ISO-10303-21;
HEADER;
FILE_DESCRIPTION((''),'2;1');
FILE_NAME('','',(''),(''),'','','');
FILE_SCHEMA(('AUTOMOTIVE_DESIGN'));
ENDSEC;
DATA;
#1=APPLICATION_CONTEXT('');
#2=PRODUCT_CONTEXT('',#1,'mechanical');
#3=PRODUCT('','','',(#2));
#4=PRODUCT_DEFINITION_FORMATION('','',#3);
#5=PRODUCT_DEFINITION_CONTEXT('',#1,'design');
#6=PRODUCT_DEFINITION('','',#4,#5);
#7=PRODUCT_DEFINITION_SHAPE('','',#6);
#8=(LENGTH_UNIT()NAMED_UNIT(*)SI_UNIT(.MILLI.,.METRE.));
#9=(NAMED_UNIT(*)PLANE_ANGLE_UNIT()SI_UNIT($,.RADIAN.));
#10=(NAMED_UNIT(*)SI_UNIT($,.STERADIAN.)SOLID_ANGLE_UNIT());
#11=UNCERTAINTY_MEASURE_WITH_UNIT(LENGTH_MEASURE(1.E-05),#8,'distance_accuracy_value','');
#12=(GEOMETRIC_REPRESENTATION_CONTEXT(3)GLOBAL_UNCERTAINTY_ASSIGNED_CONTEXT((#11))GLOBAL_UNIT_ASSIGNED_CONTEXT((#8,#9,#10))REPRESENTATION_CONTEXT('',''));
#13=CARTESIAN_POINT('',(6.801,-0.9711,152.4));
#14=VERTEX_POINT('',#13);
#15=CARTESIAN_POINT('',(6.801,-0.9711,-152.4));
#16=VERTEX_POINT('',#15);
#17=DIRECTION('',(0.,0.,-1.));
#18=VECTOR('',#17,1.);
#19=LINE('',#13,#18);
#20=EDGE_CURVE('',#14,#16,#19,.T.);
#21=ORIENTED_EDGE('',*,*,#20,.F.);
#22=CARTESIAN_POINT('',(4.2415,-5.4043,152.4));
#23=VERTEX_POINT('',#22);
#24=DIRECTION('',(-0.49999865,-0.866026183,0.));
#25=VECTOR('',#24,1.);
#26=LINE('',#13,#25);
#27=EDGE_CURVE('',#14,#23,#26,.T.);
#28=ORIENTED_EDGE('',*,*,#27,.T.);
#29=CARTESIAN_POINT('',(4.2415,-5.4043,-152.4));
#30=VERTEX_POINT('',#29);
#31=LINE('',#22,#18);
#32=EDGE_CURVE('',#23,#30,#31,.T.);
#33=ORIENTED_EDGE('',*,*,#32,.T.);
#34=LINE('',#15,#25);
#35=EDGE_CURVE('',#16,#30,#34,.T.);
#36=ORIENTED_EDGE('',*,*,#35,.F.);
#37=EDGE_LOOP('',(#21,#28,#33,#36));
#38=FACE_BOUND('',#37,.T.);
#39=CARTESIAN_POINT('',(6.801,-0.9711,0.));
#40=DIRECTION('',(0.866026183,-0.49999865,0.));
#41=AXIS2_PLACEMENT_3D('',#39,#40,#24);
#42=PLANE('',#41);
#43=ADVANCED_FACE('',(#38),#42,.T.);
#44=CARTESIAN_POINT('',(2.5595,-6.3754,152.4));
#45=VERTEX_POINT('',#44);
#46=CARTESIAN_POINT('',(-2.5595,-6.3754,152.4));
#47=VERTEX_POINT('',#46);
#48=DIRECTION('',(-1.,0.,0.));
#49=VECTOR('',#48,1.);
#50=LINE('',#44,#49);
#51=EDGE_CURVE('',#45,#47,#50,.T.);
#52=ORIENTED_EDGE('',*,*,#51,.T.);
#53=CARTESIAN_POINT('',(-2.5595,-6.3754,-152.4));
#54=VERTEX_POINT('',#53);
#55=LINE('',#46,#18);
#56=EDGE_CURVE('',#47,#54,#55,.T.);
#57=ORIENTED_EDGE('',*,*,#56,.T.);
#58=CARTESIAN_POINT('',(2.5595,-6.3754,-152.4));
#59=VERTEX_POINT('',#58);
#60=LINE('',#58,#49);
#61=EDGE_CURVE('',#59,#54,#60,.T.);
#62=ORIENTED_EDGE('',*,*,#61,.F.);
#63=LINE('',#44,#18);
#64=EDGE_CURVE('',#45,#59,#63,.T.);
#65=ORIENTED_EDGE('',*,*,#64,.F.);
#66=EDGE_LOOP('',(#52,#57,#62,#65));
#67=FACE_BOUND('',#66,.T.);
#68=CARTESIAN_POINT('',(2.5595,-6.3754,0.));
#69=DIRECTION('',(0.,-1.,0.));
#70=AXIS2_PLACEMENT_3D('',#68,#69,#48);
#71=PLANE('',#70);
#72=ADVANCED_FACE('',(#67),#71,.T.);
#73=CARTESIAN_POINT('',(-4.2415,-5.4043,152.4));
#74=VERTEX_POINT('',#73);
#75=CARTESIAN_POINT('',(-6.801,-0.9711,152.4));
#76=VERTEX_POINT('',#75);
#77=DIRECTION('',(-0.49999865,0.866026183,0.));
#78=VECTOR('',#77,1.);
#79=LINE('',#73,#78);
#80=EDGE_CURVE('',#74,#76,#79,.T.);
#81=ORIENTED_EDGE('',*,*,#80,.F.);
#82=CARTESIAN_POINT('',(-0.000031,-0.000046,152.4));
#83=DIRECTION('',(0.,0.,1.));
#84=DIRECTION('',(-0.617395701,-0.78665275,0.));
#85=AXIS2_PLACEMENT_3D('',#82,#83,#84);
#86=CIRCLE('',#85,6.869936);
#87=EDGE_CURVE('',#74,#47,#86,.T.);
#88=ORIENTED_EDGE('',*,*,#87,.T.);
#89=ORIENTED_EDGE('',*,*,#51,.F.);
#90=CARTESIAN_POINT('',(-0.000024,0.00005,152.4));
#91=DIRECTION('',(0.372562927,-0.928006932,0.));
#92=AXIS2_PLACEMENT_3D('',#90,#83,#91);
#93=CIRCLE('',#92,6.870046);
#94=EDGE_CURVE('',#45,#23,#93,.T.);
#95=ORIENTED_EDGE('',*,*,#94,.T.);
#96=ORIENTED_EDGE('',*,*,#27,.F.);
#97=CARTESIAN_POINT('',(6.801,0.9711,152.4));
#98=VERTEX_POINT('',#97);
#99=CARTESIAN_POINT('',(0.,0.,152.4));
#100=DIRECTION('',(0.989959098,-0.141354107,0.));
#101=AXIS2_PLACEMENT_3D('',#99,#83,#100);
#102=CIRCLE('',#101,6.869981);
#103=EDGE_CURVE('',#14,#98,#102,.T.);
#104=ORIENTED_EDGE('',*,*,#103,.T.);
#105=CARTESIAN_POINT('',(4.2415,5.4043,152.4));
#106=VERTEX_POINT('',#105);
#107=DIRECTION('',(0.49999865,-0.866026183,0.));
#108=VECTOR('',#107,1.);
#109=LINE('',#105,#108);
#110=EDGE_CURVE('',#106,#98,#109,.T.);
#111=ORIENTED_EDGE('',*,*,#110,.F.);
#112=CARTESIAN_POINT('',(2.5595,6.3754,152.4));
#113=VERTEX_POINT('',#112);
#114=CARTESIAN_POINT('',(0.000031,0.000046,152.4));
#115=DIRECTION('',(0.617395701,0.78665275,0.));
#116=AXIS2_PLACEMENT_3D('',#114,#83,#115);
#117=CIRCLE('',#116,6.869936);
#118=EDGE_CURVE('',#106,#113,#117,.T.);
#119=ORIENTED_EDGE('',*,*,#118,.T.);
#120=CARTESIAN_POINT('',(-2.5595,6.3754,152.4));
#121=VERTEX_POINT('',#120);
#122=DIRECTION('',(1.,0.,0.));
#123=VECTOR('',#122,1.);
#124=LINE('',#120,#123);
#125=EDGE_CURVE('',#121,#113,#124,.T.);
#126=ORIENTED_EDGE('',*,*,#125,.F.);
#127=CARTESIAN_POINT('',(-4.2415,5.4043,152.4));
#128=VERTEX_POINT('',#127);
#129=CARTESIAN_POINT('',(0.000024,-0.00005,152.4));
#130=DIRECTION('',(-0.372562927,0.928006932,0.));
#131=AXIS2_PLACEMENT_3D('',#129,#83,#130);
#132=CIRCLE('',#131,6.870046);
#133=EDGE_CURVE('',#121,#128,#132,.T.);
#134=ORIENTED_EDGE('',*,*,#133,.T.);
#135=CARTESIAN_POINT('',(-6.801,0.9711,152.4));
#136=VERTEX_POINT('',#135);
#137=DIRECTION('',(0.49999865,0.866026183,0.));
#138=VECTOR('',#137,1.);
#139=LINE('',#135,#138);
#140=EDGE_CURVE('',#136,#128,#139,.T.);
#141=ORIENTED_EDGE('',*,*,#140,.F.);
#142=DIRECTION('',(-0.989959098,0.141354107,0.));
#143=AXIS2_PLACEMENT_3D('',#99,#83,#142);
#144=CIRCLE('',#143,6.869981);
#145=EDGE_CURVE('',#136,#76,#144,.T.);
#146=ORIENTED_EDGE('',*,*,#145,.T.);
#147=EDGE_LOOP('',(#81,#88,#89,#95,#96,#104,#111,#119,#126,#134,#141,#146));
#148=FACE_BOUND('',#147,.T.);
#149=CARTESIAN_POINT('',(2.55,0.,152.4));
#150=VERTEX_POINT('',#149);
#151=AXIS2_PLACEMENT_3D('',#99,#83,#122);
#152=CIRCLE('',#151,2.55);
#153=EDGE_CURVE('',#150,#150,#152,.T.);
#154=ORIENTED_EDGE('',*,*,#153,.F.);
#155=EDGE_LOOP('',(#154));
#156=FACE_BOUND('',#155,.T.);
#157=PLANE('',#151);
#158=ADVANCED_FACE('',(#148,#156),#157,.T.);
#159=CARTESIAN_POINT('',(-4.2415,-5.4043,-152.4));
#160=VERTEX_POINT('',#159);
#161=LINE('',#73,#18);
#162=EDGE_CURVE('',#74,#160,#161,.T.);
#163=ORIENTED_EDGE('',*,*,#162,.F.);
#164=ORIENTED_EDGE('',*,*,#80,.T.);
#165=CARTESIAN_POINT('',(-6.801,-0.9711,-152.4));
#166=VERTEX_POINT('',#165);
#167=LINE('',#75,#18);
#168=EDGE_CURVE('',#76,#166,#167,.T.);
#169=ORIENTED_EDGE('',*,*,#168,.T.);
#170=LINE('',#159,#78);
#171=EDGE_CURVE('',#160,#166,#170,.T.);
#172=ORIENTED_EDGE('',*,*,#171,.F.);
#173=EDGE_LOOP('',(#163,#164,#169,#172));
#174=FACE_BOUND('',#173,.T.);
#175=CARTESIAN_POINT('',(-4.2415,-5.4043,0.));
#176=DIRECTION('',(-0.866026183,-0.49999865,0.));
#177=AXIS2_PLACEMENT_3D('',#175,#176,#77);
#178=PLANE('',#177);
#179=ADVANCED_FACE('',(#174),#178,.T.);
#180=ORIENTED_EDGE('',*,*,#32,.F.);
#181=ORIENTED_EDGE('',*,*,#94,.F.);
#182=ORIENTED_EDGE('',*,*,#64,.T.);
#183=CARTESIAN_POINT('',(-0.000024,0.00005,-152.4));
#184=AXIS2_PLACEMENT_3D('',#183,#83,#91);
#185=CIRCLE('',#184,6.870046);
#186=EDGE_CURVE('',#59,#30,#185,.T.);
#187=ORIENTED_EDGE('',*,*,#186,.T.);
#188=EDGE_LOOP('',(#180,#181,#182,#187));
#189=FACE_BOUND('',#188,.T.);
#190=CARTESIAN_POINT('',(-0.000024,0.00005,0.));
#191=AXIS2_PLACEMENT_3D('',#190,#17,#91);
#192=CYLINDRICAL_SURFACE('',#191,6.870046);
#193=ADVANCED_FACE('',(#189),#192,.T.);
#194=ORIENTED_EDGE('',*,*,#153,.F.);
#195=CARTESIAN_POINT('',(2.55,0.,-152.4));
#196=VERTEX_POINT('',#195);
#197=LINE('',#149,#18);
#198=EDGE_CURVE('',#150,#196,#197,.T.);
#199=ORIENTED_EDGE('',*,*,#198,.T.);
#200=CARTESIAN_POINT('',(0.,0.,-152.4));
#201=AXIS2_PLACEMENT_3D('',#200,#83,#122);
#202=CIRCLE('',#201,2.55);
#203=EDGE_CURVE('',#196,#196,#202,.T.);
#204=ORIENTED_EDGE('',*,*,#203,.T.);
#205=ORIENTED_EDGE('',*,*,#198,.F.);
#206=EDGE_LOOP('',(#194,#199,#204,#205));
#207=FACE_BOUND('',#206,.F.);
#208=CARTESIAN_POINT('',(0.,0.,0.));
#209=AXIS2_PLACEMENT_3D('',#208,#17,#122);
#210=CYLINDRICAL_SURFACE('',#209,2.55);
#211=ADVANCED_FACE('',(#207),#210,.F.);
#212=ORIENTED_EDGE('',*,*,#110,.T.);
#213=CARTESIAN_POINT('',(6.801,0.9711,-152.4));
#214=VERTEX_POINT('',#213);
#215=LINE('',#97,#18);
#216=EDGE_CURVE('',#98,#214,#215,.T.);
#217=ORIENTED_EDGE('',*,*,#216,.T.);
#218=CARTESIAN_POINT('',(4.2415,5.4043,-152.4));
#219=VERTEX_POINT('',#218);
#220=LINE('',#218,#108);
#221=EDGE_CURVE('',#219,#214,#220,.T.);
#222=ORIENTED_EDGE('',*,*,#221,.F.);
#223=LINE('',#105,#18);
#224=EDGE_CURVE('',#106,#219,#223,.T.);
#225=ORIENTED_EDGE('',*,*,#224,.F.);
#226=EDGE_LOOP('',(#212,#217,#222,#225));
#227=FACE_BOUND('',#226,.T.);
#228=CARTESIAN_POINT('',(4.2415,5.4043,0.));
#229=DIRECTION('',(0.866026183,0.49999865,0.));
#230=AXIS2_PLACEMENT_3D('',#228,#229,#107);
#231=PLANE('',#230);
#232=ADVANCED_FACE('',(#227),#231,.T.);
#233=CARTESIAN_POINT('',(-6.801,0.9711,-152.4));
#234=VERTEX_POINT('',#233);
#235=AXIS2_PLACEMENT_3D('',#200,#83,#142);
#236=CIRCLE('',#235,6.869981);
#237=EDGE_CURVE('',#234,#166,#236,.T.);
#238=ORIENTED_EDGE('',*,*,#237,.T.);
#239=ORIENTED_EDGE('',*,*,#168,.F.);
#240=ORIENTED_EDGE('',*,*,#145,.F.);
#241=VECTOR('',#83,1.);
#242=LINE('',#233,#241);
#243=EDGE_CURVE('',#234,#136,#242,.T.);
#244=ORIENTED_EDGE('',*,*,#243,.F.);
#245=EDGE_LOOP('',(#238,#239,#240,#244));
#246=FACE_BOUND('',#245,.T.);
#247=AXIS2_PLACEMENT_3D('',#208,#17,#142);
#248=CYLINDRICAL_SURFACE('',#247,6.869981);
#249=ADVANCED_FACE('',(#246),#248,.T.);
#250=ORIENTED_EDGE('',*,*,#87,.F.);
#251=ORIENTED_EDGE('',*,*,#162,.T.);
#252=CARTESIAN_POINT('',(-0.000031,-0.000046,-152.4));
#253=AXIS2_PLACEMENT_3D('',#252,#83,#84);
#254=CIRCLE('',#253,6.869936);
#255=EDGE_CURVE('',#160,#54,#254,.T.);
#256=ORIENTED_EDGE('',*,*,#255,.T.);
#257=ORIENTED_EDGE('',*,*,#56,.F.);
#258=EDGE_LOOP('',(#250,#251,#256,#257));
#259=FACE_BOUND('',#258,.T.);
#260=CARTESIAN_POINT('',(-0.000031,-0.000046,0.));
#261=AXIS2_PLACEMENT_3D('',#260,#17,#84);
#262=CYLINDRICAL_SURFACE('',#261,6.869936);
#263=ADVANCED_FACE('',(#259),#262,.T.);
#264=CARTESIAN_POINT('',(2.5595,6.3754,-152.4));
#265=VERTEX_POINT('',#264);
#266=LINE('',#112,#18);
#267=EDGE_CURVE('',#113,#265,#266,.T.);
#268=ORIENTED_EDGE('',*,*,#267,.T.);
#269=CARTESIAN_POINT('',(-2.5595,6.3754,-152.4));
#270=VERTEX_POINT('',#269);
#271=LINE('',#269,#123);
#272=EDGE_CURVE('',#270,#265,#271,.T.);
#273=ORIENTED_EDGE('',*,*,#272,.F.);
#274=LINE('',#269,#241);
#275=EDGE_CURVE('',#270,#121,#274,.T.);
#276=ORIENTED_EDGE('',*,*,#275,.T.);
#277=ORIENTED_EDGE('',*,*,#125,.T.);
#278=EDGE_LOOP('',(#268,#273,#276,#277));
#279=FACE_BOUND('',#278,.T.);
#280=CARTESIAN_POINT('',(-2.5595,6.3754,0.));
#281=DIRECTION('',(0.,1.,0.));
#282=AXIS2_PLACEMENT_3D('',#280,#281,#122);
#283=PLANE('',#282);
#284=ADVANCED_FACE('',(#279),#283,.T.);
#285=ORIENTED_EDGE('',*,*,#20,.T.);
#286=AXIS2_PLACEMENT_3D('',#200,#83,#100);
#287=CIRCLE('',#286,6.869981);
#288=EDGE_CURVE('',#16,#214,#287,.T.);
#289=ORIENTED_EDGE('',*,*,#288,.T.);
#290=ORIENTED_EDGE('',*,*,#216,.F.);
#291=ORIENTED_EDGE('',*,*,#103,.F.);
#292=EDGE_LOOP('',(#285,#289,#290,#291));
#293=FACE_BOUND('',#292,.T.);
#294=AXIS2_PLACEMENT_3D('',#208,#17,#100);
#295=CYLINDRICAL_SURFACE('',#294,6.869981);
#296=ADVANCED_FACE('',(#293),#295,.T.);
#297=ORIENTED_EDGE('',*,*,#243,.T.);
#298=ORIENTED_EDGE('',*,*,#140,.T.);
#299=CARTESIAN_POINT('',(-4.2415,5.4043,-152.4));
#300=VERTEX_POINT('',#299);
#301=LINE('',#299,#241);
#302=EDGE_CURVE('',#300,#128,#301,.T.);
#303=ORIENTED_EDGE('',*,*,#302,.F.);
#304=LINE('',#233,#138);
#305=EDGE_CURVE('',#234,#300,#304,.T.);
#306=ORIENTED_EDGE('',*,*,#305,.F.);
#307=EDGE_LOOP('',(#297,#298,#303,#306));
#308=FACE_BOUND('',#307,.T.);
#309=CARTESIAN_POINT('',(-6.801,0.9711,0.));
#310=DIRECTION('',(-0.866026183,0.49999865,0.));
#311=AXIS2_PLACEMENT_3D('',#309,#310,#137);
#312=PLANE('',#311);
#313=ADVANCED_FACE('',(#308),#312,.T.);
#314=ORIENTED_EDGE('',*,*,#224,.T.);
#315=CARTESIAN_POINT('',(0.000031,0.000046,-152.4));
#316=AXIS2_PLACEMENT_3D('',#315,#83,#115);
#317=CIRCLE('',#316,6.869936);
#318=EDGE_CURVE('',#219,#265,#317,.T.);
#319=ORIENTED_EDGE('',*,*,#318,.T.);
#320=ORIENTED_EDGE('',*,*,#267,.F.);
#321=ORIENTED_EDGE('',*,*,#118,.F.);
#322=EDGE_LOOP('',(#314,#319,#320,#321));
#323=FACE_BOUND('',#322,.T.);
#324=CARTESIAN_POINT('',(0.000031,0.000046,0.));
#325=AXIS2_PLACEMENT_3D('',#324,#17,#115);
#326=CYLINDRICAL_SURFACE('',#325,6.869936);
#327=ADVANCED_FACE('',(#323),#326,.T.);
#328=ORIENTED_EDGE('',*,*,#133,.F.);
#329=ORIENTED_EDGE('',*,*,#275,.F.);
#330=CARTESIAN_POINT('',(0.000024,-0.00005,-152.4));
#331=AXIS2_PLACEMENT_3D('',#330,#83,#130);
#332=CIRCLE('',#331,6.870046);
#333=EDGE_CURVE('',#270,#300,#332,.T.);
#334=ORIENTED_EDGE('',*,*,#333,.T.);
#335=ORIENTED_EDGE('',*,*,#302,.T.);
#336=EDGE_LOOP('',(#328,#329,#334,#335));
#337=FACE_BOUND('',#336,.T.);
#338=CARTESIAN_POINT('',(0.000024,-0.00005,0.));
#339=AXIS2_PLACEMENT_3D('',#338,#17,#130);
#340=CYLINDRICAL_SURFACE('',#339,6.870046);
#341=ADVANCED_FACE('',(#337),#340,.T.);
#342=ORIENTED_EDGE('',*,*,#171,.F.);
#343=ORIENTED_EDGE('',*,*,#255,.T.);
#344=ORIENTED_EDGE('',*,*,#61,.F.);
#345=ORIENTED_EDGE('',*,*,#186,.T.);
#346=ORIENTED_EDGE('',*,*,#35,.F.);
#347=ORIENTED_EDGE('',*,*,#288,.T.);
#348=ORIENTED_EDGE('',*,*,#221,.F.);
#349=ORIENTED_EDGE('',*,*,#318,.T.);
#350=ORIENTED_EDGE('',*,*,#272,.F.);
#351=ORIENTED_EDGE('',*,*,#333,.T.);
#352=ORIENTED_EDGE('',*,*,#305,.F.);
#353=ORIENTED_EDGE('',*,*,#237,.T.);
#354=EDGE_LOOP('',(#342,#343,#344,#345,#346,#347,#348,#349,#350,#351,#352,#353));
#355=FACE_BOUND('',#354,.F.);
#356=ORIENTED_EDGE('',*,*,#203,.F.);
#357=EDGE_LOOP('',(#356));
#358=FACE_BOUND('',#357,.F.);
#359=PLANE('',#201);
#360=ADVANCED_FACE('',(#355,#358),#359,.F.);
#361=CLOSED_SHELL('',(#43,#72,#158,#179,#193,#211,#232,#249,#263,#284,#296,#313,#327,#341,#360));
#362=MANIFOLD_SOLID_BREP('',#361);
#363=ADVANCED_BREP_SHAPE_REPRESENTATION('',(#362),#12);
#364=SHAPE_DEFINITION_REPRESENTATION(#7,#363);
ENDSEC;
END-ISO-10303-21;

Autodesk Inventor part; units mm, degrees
ref_plane "YZ Plane" through (0, 0, 0) normal (1, 0, 0) x (0, 1, 0)
ref_plane "XZ Plane" through (0, 0, 0) normal (0, 1, 0) x (-1, 0, 0)
ref_plane "XY Plane" through (0, 0, 0) normal (0, 0, 1) x (1, 0, 0)
sketch "ThunderHex" plane through (0, 0, 0) normal (0, 0, 1) x (1, 0, 0)
  line L0 (0, 0) -> (5.1191, 0)
  line L1 (6.801, -0.9711) -> (9.3605, -5.4043)
  arc A0 (0, 0) -> (-1.682, -0.9711) centre (2.5595, -6.3754) ccw
  arc A1 (9.3605, -7.3465) -> (9.3605, -5.4043) centre (2.5595, -6.3754) ccw
  circle A2 centre (2.5595, -6.3754) radius 2.55
  line L2 (-4.2415, -5.4043) -> (-1.682, -0.9711)
  arc A3 (-4.2415, -5.4043) -> (-4.2415, -7.3465) centre (2.5595, -6.3754) ccw
  line L3 (-1.682, -11.7797) -> (-4.2415, -7.3465)
  arc A4 (-1.682, -11.7797) -> (0, -12.7508) centre (2.5595, -6.3754) ccw
  line L4 (5.1191, -12.7508) -> (0, -12.7508)
  arc A5 (5.1191, -12.7508) -> (6.801, -11.7797) centre (2.5595, -6.3754) ccw
  line L5 (9.3605, -7.3465) -> (6.801, -11.7797)
  arc A6 (6.801, -0.9711) -> (5.1191, 0) centre (2.5595, -6.3754) ccw
  point P0 (2.5595, -6.3754)
sketch "Sketch1" plane through (0, 0, 0) normal (0, 0, 1) x (1, 0, 0)
  line L0 (-2.5595, 6.3754) -> (2.5595, 6.3754)
  line L1 (4.2415, 5.4043) -> (6.801, 0.9711)
  arc A0 (-2.5595, 6.3754) -> (-4.2415, 5.4043) centre (0, 0) ccw
  arc A1 (6.801, -0.9711) -> (6.801, 0.9711) centre (0, 0) ccw
  circle A2 centre (0, 0) radius 2.55
  line L2 (-6.801, 0.9711) -> (-4.2415, 5.4043)
  arc A3 (-6.801, 0.9711) -> (-6.801, -0.9711) centre (0, 0) ccw
  line L3 (-4.2415, -5.4043) -> (-6.801, -0.9711)
  arc A4 (-4.2415, -5.4043) -> (-2.5595, -6.3754) centre (0, 0) ccw
  line L4 (2.5595, -6.3754) -> (-2.5595, -6.3754)
  arc A5 (2.5595, -6.3754) -> (4.2415, -5.4043) centre (0, 0) ccw
  line L5 (6.801, -0.9711) -> (4.2415, -5.4043)
  arc A6 (4.2415, 5.4043) -> (2.5595, 6.3754) centre (0, 0) ccw
extrude "Extrusion1" add sketch "Sketch1" along normal mid plane 304.8
properties part number "ThunderHex" material "Aluminum 6061"
